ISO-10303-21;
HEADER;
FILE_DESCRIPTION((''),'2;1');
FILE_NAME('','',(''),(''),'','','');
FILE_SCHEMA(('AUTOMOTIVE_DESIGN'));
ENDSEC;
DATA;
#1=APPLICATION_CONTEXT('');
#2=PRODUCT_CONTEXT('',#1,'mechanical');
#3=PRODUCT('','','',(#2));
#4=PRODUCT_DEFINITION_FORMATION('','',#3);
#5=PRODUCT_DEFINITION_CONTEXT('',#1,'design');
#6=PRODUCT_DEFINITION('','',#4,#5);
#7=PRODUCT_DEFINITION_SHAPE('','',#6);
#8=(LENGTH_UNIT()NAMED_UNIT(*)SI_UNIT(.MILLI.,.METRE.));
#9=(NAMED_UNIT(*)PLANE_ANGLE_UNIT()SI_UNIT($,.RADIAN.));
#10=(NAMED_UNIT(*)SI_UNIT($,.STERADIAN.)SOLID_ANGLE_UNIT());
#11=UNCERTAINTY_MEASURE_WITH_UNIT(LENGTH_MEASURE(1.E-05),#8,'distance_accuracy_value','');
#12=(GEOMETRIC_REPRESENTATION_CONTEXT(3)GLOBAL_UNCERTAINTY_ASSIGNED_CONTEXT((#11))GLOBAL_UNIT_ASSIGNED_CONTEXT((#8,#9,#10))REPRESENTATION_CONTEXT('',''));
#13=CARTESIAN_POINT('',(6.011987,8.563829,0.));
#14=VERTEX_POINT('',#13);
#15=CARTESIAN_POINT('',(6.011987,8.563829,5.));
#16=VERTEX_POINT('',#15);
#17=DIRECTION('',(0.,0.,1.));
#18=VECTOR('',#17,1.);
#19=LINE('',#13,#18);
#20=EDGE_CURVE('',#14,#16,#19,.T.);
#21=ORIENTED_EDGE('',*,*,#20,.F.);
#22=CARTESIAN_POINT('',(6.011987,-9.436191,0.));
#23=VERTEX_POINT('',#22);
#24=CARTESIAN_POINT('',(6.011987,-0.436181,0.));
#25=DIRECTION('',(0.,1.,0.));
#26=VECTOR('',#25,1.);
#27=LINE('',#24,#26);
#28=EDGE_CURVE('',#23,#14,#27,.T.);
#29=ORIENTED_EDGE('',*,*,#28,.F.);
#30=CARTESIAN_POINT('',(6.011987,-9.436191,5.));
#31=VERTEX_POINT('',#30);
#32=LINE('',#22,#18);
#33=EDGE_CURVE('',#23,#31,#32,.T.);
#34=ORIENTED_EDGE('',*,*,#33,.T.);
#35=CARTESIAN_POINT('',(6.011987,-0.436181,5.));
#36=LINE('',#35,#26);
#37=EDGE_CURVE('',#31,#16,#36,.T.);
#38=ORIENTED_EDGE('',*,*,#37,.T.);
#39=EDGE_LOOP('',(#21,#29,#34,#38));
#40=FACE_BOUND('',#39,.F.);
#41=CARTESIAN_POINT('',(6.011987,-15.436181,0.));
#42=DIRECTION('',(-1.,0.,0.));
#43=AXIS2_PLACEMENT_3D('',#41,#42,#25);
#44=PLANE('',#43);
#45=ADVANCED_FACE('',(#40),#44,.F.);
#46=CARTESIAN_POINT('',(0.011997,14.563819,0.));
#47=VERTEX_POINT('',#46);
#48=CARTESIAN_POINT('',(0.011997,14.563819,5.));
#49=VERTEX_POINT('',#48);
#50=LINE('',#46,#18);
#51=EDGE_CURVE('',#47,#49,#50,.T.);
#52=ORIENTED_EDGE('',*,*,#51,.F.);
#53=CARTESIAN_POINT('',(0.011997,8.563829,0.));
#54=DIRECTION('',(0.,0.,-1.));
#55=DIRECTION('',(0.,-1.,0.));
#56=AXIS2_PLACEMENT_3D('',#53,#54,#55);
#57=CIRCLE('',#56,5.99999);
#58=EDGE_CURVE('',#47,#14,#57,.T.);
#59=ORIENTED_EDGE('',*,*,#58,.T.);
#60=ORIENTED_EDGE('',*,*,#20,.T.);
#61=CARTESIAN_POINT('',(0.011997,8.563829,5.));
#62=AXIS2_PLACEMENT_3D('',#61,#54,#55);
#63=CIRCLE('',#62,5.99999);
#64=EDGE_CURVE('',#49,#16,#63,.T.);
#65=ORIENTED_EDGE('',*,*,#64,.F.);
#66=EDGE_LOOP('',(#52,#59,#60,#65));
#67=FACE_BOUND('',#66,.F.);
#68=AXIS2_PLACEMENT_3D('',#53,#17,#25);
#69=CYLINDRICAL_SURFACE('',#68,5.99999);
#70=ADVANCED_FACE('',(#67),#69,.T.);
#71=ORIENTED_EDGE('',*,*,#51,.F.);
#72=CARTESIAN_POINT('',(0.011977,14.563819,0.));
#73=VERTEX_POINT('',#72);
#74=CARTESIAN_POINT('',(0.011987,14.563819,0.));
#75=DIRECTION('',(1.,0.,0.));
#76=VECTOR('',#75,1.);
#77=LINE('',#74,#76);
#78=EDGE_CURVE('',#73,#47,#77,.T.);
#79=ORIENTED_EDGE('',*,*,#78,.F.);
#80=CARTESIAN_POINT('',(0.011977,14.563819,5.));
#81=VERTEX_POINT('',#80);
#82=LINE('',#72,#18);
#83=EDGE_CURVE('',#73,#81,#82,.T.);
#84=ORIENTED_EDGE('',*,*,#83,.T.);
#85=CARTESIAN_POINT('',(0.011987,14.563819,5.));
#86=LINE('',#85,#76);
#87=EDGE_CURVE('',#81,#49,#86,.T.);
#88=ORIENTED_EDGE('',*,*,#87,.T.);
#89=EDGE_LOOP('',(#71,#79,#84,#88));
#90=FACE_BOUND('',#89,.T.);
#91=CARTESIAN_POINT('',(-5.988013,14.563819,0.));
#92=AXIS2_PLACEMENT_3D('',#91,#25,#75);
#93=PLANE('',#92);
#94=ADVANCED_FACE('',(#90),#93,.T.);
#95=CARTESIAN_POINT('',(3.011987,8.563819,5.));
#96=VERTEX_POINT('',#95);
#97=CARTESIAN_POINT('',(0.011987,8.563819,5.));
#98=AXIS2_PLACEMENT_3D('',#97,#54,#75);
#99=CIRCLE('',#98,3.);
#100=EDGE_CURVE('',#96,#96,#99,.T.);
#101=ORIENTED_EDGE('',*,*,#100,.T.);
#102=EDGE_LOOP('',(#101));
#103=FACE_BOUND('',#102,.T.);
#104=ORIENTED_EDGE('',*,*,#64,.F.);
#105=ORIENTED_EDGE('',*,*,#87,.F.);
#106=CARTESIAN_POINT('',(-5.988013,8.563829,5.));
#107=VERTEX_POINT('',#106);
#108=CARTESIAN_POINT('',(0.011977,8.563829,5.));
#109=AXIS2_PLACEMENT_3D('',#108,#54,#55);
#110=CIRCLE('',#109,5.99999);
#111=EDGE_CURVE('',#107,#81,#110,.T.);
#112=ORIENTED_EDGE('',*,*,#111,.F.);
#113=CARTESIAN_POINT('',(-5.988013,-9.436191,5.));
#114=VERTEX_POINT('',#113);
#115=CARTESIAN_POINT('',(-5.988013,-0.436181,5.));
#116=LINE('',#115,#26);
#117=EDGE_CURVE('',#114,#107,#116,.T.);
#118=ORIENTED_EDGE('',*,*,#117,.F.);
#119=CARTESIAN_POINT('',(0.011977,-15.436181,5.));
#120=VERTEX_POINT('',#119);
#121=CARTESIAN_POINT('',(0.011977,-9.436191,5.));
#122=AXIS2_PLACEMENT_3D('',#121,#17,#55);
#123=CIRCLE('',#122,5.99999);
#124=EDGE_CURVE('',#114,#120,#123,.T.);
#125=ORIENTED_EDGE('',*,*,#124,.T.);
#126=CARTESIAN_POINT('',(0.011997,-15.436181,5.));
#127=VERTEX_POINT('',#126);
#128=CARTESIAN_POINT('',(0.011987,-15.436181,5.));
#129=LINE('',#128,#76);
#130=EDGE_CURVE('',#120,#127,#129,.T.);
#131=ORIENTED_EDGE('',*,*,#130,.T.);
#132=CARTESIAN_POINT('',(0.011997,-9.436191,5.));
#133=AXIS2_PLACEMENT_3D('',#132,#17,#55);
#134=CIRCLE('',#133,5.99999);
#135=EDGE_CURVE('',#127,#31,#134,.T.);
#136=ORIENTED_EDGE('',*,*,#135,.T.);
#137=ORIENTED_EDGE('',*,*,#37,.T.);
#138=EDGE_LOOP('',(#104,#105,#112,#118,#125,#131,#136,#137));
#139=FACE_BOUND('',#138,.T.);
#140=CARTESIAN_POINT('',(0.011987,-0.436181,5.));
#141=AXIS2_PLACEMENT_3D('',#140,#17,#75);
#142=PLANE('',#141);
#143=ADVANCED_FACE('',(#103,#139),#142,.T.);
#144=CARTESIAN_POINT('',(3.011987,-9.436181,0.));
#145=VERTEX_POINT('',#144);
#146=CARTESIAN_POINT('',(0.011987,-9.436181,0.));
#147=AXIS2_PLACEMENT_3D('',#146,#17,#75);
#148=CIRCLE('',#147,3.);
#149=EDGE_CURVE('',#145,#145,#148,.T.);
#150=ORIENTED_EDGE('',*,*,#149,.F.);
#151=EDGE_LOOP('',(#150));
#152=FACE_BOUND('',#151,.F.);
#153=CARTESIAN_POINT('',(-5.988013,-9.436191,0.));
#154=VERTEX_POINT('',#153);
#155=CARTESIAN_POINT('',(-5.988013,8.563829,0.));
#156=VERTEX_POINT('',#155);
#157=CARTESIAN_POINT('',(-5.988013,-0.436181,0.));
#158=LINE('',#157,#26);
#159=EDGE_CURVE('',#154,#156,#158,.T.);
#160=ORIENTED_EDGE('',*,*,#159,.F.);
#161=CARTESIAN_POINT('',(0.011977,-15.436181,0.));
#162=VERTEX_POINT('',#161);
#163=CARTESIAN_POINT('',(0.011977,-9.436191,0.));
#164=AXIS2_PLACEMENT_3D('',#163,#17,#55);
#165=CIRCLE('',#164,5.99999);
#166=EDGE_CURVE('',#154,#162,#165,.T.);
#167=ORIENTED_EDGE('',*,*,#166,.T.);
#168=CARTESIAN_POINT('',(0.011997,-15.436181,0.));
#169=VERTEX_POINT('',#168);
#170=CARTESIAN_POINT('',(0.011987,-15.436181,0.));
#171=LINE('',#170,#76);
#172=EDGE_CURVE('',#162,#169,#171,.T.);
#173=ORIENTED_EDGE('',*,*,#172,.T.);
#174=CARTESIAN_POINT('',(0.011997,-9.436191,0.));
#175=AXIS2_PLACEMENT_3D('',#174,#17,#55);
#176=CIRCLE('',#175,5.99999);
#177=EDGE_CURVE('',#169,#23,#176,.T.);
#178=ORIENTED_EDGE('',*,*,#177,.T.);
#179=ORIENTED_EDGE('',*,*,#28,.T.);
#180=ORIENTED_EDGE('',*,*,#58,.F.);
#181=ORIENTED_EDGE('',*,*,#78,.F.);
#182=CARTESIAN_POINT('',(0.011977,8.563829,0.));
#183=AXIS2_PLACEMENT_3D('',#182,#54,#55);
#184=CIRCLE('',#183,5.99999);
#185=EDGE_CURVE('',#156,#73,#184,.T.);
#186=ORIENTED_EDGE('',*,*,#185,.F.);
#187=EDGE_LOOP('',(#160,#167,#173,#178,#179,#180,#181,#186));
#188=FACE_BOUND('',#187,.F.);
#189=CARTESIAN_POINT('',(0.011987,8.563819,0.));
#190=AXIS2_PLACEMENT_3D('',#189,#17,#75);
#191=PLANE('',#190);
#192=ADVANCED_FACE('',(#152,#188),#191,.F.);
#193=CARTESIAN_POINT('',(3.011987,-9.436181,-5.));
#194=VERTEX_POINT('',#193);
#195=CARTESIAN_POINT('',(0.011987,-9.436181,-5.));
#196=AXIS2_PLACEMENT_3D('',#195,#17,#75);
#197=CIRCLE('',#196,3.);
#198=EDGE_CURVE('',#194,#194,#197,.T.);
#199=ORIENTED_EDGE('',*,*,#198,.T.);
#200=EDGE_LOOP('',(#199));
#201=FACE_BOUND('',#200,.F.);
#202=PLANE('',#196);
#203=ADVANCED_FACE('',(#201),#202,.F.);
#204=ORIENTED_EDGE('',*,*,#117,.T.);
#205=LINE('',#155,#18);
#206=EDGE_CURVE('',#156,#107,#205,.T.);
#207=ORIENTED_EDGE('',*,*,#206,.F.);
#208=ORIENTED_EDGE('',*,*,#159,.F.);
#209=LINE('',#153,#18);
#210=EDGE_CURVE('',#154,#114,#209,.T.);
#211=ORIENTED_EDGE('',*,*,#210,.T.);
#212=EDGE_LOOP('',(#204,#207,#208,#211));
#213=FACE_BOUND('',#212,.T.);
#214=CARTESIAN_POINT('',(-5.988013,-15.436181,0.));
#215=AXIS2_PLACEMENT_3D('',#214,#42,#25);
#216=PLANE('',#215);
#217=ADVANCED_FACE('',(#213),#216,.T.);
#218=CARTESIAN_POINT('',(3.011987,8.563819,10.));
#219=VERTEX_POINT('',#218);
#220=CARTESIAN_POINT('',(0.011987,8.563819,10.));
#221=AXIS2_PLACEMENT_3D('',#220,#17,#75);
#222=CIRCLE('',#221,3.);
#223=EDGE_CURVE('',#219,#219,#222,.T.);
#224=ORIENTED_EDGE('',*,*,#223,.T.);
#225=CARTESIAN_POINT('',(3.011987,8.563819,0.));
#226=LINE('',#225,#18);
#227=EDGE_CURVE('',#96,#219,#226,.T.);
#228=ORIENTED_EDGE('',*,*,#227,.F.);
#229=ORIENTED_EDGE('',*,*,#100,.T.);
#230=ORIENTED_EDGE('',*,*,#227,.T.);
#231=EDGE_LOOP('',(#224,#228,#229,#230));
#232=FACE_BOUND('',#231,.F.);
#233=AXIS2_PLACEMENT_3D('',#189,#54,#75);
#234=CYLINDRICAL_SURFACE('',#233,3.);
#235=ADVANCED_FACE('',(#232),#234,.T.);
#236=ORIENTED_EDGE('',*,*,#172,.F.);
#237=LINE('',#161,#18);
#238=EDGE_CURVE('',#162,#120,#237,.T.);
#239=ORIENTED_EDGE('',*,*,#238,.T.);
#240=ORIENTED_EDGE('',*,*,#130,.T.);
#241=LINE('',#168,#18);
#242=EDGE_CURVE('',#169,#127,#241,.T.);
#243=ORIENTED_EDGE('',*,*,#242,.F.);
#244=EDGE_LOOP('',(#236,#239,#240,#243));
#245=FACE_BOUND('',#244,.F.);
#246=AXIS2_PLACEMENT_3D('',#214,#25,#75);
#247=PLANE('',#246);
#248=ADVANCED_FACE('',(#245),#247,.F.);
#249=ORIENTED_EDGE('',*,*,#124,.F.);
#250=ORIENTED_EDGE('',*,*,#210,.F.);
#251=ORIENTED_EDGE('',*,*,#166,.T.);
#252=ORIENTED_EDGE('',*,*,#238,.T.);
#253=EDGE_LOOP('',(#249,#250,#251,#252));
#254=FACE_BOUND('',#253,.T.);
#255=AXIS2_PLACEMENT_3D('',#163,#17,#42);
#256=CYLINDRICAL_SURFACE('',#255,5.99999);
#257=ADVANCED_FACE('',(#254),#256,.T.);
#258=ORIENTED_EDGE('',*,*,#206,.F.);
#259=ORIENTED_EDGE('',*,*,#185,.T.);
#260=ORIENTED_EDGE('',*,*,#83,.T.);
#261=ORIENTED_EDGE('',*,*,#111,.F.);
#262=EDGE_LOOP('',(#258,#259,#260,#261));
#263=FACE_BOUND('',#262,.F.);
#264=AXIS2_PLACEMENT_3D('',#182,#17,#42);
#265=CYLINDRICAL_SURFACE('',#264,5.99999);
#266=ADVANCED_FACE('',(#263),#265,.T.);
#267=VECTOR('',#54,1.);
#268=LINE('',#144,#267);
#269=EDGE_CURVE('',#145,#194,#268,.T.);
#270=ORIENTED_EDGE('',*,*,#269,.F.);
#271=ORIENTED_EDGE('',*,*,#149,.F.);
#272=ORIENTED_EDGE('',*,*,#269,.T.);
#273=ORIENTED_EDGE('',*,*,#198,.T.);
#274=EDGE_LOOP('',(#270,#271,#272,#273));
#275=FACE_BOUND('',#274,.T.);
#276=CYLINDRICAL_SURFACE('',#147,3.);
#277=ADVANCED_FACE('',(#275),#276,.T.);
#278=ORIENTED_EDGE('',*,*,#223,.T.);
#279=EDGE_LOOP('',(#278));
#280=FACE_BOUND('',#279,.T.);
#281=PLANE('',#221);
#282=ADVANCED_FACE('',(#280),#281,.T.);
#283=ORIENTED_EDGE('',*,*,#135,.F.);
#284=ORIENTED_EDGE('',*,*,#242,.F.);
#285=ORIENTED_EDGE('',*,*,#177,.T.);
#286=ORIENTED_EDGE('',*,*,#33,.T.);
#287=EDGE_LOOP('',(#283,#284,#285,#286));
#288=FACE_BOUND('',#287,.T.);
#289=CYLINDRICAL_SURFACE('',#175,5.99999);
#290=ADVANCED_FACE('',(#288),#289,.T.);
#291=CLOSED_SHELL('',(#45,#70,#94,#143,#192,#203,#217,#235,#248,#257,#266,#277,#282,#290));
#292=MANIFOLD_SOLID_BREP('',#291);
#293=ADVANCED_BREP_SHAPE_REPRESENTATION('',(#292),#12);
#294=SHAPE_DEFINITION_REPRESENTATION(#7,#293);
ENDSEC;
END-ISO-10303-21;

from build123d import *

# Parameters (mm, degrees)
F0_W     = 12
F0_H     = 30
F0_R     = 3
F1_DEPTH = 5
F2_DEPTH = 10
F3_DEPTH = 5
F4_R     = 5.99999


# Not quite as in the source:
# - a fillet or chamfer is up to 0.001 mm smaller than in the source, because OpenCascade refuses the exact size


with BuildPart() as f1:
    # F0 (on Top) → F1 (new body)
    with BuildSketch(Plane.XY):
        with Locations((0.0119865412, -0.4361811298)):
            Rectangle(F0_W, F0_H)
        with Locations((0.0119865412, -9.4361811298)):
            Circle(F0_R, mode=Mode.SUBTRACT)
        with Locations((0.0119865412, 8.5638188702)):
            Circle(F0_R, mode=Mode.SUBTRACT)
        with Locations((0.0119865412, 8.5638188702)):
            Circle(F0_R)
        with Locations((0.0119865412, -9.4361811298)):
            Circle(F0_R)
    extrude(amount=F1_DEPTH)

    # F0 (on Top) → F2 (join)
    with BuildSketch(Plane.XY):
        with Locations((0.0119865412, 8.5638188702)):
            Circle(F0_R)
    extrude(amount=F2_DEPTH)

    # F0 (on Top) → F3 (join)
    with BuildSketch(Plane.XY):
        with Locations((0.0119865412, -9.4361811298)):
            Circle(F0_R)
    extrude(amount=-F3_DEPTH)

    # F4 (radius 6 in the source; OpenCascade refuses exactly that, so slightly less here)
    f4_edges = [f1.edges().sort_by_distance(p)[0] for p in [
        (6.011987, 14.563819, 2.5),
        (-5.988013, 14.563819, 2.5),
        (6.011987, -15.436181, 2.5),
        (-5.988013, -15.436181, 2.5),
    ]]
    fillet(f4_edges, radius=F4_R)


solid = f1.part
